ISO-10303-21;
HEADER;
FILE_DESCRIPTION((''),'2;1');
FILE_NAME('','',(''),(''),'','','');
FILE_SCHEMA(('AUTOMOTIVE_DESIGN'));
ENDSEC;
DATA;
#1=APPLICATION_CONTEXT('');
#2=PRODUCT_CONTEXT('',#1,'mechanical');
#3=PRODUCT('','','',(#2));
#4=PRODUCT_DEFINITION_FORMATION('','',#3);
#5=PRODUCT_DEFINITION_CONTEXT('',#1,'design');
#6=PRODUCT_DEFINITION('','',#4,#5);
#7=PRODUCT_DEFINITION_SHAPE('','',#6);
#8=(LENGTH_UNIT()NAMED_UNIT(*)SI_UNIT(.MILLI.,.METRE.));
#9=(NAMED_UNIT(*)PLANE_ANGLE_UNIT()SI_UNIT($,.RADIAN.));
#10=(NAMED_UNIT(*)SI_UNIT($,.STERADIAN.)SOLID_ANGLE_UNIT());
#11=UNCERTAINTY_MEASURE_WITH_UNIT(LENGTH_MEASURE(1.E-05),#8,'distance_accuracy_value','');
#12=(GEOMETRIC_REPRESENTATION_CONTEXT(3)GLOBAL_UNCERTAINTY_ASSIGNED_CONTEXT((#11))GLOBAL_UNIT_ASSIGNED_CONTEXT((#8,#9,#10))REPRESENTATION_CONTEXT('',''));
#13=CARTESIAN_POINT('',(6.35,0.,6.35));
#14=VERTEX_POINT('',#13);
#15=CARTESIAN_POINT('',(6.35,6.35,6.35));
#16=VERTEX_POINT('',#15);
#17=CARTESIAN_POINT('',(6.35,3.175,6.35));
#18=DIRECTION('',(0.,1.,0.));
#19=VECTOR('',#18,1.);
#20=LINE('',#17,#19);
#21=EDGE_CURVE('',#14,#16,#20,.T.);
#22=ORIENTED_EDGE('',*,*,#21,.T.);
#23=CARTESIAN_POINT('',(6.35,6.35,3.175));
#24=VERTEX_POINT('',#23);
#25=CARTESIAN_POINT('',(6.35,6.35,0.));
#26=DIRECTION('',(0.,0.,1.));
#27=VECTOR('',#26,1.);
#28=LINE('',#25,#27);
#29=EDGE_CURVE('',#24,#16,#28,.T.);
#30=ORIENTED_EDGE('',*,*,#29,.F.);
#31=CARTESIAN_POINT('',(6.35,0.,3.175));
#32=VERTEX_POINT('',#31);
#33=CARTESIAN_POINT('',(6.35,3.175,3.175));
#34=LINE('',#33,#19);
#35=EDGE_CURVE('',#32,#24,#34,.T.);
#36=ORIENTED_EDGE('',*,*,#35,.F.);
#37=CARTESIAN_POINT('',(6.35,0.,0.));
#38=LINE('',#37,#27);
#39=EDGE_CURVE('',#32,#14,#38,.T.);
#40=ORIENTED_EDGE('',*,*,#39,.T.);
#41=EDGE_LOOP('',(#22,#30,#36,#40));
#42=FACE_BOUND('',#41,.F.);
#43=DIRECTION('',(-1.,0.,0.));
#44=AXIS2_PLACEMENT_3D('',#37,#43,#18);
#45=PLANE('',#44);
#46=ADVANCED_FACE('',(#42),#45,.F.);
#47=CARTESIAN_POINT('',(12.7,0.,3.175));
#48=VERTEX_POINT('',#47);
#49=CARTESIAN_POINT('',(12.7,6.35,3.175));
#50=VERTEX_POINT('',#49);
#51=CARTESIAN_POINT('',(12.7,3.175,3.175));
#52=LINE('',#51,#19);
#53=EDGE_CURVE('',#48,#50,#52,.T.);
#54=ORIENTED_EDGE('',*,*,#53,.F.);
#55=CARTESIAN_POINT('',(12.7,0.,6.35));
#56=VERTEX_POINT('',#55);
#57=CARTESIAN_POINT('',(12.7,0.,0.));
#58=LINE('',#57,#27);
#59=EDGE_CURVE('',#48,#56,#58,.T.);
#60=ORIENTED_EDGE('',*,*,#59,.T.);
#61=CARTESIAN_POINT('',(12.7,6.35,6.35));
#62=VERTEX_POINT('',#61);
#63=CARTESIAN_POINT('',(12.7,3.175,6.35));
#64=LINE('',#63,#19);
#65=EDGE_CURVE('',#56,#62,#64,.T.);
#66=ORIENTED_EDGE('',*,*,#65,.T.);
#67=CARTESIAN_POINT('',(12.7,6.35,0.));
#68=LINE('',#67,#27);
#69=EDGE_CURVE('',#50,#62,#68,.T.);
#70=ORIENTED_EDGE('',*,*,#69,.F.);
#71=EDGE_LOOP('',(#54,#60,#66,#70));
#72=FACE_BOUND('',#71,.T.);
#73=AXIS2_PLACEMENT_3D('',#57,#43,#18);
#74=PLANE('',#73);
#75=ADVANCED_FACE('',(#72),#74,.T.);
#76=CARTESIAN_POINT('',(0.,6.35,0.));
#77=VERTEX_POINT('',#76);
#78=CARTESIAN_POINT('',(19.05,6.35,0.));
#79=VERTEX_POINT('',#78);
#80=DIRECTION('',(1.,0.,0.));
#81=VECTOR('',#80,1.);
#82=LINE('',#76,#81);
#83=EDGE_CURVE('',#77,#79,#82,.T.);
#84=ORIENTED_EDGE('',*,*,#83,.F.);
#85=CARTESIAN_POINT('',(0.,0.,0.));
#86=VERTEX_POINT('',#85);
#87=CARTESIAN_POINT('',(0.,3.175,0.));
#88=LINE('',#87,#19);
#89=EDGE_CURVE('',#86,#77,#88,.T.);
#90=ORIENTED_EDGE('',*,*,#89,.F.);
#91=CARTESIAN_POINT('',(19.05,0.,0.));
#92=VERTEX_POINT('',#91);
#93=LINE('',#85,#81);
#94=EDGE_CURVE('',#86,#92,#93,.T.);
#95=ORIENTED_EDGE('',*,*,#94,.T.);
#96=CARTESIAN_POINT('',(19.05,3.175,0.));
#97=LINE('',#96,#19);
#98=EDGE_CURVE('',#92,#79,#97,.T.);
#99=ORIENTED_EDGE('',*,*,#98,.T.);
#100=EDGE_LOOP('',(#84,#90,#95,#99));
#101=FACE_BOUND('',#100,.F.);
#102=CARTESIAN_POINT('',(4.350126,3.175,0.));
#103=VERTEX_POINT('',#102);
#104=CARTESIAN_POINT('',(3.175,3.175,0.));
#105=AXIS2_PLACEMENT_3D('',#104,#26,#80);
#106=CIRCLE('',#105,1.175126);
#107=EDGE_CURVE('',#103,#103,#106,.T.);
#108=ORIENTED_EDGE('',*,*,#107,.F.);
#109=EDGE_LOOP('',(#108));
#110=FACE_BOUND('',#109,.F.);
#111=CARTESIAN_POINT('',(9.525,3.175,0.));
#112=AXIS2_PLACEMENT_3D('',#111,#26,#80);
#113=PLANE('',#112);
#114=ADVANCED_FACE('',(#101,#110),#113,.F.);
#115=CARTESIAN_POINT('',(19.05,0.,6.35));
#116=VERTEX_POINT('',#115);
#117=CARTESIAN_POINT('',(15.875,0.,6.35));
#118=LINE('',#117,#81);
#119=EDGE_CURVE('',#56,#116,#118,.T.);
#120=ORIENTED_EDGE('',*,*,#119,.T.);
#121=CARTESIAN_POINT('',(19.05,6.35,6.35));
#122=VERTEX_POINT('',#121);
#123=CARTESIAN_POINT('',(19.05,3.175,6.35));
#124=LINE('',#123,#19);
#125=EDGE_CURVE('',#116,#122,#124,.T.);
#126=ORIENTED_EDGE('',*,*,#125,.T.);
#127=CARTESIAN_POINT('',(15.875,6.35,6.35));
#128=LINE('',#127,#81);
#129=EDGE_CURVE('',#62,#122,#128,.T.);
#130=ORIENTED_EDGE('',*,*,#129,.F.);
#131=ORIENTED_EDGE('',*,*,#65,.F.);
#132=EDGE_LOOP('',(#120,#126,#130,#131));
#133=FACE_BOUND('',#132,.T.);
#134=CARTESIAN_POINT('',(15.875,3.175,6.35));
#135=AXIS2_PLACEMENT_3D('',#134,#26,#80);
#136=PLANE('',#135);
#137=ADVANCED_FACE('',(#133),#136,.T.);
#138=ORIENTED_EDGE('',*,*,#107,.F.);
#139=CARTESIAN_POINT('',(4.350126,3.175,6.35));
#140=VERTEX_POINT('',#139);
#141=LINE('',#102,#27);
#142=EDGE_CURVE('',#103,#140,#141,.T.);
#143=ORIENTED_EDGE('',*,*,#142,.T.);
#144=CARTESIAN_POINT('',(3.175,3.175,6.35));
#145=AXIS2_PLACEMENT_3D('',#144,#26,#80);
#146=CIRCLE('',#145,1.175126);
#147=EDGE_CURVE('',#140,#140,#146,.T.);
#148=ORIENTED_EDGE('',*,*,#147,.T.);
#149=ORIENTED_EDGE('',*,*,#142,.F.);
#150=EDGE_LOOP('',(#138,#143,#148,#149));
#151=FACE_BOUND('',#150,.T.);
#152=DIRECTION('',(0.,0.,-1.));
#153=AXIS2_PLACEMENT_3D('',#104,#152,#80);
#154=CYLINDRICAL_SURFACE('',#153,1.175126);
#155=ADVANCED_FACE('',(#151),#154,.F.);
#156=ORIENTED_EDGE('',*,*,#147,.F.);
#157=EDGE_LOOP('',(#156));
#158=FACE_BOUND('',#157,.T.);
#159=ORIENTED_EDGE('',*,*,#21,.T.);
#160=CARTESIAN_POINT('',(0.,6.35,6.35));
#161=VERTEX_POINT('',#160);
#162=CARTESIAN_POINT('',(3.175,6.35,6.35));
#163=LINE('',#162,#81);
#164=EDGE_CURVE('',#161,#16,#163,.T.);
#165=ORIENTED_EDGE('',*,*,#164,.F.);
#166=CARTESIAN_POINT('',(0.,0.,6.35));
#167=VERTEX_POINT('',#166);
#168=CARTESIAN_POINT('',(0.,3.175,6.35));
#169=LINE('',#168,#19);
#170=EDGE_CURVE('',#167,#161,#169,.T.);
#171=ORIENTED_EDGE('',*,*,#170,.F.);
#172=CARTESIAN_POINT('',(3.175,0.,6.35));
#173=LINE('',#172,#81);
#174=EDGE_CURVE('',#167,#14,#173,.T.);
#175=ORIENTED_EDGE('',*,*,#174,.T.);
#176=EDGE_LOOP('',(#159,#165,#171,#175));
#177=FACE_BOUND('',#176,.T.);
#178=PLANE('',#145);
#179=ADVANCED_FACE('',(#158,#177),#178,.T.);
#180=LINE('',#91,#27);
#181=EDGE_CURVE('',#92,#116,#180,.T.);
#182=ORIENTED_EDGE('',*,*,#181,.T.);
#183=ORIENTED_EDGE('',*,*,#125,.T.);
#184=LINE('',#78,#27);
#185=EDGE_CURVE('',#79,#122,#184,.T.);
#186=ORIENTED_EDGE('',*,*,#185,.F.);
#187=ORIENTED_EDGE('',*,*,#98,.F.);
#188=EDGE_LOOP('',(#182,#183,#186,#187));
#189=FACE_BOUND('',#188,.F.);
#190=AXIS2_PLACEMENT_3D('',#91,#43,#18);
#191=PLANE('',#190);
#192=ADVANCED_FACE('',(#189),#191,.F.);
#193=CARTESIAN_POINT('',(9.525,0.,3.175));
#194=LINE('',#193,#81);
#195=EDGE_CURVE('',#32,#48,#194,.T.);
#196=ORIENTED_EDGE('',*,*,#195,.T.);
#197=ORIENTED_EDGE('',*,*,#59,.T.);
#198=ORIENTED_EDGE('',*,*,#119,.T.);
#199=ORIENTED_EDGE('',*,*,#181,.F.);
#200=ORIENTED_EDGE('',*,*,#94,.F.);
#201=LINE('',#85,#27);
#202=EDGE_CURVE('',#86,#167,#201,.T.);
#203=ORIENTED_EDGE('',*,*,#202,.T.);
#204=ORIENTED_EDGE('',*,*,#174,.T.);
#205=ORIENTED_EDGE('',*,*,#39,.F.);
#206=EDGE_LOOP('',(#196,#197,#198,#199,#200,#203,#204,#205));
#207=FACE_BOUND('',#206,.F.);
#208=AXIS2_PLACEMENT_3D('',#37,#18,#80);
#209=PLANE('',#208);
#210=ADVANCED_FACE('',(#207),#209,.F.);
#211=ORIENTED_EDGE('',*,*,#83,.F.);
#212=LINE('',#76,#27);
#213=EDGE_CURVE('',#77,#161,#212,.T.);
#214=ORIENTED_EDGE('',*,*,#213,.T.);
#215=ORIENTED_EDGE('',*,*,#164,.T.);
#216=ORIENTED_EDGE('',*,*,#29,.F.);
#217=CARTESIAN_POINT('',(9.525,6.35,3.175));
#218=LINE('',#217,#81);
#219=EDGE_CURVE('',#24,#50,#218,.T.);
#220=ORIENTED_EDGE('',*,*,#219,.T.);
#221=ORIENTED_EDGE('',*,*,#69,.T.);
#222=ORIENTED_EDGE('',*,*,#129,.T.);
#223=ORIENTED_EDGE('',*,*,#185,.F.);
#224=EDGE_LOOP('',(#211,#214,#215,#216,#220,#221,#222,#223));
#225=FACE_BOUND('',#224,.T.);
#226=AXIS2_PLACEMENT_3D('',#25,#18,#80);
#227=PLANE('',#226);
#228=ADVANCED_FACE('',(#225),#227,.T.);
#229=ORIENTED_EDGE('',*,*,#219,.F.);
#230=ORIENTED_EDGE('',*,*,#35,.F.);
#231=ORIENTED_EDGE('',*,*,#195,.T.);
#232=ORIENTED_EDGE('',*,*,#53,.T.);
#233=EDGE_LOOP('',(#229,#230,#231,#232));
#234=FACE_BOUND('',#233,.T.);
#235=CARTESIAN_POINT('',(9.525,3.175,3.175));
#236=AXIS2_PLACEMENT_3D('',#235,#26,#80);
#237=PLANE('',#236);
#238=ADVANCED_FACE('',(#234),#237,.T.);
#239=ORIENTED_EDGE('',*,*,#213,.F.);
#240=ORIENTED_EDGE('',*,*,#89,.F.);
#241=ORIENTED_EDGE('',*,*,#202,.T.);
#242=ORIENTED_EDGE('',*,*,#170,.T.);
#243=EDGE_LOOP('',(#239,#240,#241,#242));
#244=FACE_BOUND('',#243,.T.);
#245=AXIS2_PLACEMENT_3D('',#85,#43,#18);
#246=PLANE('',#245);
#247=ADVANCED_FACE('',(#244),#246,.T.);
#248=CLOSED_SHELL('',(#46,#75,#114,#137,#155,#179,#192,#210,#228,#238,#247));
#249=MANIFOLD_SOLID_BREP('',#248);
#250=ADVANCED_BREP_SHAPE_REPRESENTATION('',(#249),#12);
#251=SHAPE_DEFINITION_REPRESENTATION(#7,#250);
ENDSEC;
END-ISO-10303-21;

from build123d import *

# Parameters (mm, degrees)
F0_W     = 6.35
F0_H     = 6.35
F0_R     = 1.1751262937
F1_DEPTH = 6.35
F2_DEPTH = 3.175


# Not quite as in the source:
# - a feature names something its author has since deleted; it is built from what else it names


with BuildPart() as f1:
    # F0 (on Top) → F1 (new body)
    with BuildSketch(Plane.XY):
        with Locations((3.175, 3.175)):
            Rectangle(F0_W, F0_H)
        with Locations((3.175, 3.175)):
            Circle(F0_R, mode=Mode.SUBTRACT)
    extrude(amount=F1_DEPTH)



with BuildPart() as f1b:
    # F0 (on Top) → F1, piece 2 (new body)
    with BuildSketch(Plane.XY):
        with Locations((15.875, 3.175)):
            Rectangle(F0_W, F0_H)
    extrude(amount=F1_DEPTH)


with BuildPart() as f1_1:
    add(f1.part)

    add(f1b.part)  # F2 merges F1b
    # F0 (on Top) → F2 (join)
    with BuildSketch(Plane.XY):
        with Locations((9.525, 3.175)):
            Rectangle(F0_W, F0_H)
    extrude(amount=F2_DEPTH)


solid = f1_1.part
